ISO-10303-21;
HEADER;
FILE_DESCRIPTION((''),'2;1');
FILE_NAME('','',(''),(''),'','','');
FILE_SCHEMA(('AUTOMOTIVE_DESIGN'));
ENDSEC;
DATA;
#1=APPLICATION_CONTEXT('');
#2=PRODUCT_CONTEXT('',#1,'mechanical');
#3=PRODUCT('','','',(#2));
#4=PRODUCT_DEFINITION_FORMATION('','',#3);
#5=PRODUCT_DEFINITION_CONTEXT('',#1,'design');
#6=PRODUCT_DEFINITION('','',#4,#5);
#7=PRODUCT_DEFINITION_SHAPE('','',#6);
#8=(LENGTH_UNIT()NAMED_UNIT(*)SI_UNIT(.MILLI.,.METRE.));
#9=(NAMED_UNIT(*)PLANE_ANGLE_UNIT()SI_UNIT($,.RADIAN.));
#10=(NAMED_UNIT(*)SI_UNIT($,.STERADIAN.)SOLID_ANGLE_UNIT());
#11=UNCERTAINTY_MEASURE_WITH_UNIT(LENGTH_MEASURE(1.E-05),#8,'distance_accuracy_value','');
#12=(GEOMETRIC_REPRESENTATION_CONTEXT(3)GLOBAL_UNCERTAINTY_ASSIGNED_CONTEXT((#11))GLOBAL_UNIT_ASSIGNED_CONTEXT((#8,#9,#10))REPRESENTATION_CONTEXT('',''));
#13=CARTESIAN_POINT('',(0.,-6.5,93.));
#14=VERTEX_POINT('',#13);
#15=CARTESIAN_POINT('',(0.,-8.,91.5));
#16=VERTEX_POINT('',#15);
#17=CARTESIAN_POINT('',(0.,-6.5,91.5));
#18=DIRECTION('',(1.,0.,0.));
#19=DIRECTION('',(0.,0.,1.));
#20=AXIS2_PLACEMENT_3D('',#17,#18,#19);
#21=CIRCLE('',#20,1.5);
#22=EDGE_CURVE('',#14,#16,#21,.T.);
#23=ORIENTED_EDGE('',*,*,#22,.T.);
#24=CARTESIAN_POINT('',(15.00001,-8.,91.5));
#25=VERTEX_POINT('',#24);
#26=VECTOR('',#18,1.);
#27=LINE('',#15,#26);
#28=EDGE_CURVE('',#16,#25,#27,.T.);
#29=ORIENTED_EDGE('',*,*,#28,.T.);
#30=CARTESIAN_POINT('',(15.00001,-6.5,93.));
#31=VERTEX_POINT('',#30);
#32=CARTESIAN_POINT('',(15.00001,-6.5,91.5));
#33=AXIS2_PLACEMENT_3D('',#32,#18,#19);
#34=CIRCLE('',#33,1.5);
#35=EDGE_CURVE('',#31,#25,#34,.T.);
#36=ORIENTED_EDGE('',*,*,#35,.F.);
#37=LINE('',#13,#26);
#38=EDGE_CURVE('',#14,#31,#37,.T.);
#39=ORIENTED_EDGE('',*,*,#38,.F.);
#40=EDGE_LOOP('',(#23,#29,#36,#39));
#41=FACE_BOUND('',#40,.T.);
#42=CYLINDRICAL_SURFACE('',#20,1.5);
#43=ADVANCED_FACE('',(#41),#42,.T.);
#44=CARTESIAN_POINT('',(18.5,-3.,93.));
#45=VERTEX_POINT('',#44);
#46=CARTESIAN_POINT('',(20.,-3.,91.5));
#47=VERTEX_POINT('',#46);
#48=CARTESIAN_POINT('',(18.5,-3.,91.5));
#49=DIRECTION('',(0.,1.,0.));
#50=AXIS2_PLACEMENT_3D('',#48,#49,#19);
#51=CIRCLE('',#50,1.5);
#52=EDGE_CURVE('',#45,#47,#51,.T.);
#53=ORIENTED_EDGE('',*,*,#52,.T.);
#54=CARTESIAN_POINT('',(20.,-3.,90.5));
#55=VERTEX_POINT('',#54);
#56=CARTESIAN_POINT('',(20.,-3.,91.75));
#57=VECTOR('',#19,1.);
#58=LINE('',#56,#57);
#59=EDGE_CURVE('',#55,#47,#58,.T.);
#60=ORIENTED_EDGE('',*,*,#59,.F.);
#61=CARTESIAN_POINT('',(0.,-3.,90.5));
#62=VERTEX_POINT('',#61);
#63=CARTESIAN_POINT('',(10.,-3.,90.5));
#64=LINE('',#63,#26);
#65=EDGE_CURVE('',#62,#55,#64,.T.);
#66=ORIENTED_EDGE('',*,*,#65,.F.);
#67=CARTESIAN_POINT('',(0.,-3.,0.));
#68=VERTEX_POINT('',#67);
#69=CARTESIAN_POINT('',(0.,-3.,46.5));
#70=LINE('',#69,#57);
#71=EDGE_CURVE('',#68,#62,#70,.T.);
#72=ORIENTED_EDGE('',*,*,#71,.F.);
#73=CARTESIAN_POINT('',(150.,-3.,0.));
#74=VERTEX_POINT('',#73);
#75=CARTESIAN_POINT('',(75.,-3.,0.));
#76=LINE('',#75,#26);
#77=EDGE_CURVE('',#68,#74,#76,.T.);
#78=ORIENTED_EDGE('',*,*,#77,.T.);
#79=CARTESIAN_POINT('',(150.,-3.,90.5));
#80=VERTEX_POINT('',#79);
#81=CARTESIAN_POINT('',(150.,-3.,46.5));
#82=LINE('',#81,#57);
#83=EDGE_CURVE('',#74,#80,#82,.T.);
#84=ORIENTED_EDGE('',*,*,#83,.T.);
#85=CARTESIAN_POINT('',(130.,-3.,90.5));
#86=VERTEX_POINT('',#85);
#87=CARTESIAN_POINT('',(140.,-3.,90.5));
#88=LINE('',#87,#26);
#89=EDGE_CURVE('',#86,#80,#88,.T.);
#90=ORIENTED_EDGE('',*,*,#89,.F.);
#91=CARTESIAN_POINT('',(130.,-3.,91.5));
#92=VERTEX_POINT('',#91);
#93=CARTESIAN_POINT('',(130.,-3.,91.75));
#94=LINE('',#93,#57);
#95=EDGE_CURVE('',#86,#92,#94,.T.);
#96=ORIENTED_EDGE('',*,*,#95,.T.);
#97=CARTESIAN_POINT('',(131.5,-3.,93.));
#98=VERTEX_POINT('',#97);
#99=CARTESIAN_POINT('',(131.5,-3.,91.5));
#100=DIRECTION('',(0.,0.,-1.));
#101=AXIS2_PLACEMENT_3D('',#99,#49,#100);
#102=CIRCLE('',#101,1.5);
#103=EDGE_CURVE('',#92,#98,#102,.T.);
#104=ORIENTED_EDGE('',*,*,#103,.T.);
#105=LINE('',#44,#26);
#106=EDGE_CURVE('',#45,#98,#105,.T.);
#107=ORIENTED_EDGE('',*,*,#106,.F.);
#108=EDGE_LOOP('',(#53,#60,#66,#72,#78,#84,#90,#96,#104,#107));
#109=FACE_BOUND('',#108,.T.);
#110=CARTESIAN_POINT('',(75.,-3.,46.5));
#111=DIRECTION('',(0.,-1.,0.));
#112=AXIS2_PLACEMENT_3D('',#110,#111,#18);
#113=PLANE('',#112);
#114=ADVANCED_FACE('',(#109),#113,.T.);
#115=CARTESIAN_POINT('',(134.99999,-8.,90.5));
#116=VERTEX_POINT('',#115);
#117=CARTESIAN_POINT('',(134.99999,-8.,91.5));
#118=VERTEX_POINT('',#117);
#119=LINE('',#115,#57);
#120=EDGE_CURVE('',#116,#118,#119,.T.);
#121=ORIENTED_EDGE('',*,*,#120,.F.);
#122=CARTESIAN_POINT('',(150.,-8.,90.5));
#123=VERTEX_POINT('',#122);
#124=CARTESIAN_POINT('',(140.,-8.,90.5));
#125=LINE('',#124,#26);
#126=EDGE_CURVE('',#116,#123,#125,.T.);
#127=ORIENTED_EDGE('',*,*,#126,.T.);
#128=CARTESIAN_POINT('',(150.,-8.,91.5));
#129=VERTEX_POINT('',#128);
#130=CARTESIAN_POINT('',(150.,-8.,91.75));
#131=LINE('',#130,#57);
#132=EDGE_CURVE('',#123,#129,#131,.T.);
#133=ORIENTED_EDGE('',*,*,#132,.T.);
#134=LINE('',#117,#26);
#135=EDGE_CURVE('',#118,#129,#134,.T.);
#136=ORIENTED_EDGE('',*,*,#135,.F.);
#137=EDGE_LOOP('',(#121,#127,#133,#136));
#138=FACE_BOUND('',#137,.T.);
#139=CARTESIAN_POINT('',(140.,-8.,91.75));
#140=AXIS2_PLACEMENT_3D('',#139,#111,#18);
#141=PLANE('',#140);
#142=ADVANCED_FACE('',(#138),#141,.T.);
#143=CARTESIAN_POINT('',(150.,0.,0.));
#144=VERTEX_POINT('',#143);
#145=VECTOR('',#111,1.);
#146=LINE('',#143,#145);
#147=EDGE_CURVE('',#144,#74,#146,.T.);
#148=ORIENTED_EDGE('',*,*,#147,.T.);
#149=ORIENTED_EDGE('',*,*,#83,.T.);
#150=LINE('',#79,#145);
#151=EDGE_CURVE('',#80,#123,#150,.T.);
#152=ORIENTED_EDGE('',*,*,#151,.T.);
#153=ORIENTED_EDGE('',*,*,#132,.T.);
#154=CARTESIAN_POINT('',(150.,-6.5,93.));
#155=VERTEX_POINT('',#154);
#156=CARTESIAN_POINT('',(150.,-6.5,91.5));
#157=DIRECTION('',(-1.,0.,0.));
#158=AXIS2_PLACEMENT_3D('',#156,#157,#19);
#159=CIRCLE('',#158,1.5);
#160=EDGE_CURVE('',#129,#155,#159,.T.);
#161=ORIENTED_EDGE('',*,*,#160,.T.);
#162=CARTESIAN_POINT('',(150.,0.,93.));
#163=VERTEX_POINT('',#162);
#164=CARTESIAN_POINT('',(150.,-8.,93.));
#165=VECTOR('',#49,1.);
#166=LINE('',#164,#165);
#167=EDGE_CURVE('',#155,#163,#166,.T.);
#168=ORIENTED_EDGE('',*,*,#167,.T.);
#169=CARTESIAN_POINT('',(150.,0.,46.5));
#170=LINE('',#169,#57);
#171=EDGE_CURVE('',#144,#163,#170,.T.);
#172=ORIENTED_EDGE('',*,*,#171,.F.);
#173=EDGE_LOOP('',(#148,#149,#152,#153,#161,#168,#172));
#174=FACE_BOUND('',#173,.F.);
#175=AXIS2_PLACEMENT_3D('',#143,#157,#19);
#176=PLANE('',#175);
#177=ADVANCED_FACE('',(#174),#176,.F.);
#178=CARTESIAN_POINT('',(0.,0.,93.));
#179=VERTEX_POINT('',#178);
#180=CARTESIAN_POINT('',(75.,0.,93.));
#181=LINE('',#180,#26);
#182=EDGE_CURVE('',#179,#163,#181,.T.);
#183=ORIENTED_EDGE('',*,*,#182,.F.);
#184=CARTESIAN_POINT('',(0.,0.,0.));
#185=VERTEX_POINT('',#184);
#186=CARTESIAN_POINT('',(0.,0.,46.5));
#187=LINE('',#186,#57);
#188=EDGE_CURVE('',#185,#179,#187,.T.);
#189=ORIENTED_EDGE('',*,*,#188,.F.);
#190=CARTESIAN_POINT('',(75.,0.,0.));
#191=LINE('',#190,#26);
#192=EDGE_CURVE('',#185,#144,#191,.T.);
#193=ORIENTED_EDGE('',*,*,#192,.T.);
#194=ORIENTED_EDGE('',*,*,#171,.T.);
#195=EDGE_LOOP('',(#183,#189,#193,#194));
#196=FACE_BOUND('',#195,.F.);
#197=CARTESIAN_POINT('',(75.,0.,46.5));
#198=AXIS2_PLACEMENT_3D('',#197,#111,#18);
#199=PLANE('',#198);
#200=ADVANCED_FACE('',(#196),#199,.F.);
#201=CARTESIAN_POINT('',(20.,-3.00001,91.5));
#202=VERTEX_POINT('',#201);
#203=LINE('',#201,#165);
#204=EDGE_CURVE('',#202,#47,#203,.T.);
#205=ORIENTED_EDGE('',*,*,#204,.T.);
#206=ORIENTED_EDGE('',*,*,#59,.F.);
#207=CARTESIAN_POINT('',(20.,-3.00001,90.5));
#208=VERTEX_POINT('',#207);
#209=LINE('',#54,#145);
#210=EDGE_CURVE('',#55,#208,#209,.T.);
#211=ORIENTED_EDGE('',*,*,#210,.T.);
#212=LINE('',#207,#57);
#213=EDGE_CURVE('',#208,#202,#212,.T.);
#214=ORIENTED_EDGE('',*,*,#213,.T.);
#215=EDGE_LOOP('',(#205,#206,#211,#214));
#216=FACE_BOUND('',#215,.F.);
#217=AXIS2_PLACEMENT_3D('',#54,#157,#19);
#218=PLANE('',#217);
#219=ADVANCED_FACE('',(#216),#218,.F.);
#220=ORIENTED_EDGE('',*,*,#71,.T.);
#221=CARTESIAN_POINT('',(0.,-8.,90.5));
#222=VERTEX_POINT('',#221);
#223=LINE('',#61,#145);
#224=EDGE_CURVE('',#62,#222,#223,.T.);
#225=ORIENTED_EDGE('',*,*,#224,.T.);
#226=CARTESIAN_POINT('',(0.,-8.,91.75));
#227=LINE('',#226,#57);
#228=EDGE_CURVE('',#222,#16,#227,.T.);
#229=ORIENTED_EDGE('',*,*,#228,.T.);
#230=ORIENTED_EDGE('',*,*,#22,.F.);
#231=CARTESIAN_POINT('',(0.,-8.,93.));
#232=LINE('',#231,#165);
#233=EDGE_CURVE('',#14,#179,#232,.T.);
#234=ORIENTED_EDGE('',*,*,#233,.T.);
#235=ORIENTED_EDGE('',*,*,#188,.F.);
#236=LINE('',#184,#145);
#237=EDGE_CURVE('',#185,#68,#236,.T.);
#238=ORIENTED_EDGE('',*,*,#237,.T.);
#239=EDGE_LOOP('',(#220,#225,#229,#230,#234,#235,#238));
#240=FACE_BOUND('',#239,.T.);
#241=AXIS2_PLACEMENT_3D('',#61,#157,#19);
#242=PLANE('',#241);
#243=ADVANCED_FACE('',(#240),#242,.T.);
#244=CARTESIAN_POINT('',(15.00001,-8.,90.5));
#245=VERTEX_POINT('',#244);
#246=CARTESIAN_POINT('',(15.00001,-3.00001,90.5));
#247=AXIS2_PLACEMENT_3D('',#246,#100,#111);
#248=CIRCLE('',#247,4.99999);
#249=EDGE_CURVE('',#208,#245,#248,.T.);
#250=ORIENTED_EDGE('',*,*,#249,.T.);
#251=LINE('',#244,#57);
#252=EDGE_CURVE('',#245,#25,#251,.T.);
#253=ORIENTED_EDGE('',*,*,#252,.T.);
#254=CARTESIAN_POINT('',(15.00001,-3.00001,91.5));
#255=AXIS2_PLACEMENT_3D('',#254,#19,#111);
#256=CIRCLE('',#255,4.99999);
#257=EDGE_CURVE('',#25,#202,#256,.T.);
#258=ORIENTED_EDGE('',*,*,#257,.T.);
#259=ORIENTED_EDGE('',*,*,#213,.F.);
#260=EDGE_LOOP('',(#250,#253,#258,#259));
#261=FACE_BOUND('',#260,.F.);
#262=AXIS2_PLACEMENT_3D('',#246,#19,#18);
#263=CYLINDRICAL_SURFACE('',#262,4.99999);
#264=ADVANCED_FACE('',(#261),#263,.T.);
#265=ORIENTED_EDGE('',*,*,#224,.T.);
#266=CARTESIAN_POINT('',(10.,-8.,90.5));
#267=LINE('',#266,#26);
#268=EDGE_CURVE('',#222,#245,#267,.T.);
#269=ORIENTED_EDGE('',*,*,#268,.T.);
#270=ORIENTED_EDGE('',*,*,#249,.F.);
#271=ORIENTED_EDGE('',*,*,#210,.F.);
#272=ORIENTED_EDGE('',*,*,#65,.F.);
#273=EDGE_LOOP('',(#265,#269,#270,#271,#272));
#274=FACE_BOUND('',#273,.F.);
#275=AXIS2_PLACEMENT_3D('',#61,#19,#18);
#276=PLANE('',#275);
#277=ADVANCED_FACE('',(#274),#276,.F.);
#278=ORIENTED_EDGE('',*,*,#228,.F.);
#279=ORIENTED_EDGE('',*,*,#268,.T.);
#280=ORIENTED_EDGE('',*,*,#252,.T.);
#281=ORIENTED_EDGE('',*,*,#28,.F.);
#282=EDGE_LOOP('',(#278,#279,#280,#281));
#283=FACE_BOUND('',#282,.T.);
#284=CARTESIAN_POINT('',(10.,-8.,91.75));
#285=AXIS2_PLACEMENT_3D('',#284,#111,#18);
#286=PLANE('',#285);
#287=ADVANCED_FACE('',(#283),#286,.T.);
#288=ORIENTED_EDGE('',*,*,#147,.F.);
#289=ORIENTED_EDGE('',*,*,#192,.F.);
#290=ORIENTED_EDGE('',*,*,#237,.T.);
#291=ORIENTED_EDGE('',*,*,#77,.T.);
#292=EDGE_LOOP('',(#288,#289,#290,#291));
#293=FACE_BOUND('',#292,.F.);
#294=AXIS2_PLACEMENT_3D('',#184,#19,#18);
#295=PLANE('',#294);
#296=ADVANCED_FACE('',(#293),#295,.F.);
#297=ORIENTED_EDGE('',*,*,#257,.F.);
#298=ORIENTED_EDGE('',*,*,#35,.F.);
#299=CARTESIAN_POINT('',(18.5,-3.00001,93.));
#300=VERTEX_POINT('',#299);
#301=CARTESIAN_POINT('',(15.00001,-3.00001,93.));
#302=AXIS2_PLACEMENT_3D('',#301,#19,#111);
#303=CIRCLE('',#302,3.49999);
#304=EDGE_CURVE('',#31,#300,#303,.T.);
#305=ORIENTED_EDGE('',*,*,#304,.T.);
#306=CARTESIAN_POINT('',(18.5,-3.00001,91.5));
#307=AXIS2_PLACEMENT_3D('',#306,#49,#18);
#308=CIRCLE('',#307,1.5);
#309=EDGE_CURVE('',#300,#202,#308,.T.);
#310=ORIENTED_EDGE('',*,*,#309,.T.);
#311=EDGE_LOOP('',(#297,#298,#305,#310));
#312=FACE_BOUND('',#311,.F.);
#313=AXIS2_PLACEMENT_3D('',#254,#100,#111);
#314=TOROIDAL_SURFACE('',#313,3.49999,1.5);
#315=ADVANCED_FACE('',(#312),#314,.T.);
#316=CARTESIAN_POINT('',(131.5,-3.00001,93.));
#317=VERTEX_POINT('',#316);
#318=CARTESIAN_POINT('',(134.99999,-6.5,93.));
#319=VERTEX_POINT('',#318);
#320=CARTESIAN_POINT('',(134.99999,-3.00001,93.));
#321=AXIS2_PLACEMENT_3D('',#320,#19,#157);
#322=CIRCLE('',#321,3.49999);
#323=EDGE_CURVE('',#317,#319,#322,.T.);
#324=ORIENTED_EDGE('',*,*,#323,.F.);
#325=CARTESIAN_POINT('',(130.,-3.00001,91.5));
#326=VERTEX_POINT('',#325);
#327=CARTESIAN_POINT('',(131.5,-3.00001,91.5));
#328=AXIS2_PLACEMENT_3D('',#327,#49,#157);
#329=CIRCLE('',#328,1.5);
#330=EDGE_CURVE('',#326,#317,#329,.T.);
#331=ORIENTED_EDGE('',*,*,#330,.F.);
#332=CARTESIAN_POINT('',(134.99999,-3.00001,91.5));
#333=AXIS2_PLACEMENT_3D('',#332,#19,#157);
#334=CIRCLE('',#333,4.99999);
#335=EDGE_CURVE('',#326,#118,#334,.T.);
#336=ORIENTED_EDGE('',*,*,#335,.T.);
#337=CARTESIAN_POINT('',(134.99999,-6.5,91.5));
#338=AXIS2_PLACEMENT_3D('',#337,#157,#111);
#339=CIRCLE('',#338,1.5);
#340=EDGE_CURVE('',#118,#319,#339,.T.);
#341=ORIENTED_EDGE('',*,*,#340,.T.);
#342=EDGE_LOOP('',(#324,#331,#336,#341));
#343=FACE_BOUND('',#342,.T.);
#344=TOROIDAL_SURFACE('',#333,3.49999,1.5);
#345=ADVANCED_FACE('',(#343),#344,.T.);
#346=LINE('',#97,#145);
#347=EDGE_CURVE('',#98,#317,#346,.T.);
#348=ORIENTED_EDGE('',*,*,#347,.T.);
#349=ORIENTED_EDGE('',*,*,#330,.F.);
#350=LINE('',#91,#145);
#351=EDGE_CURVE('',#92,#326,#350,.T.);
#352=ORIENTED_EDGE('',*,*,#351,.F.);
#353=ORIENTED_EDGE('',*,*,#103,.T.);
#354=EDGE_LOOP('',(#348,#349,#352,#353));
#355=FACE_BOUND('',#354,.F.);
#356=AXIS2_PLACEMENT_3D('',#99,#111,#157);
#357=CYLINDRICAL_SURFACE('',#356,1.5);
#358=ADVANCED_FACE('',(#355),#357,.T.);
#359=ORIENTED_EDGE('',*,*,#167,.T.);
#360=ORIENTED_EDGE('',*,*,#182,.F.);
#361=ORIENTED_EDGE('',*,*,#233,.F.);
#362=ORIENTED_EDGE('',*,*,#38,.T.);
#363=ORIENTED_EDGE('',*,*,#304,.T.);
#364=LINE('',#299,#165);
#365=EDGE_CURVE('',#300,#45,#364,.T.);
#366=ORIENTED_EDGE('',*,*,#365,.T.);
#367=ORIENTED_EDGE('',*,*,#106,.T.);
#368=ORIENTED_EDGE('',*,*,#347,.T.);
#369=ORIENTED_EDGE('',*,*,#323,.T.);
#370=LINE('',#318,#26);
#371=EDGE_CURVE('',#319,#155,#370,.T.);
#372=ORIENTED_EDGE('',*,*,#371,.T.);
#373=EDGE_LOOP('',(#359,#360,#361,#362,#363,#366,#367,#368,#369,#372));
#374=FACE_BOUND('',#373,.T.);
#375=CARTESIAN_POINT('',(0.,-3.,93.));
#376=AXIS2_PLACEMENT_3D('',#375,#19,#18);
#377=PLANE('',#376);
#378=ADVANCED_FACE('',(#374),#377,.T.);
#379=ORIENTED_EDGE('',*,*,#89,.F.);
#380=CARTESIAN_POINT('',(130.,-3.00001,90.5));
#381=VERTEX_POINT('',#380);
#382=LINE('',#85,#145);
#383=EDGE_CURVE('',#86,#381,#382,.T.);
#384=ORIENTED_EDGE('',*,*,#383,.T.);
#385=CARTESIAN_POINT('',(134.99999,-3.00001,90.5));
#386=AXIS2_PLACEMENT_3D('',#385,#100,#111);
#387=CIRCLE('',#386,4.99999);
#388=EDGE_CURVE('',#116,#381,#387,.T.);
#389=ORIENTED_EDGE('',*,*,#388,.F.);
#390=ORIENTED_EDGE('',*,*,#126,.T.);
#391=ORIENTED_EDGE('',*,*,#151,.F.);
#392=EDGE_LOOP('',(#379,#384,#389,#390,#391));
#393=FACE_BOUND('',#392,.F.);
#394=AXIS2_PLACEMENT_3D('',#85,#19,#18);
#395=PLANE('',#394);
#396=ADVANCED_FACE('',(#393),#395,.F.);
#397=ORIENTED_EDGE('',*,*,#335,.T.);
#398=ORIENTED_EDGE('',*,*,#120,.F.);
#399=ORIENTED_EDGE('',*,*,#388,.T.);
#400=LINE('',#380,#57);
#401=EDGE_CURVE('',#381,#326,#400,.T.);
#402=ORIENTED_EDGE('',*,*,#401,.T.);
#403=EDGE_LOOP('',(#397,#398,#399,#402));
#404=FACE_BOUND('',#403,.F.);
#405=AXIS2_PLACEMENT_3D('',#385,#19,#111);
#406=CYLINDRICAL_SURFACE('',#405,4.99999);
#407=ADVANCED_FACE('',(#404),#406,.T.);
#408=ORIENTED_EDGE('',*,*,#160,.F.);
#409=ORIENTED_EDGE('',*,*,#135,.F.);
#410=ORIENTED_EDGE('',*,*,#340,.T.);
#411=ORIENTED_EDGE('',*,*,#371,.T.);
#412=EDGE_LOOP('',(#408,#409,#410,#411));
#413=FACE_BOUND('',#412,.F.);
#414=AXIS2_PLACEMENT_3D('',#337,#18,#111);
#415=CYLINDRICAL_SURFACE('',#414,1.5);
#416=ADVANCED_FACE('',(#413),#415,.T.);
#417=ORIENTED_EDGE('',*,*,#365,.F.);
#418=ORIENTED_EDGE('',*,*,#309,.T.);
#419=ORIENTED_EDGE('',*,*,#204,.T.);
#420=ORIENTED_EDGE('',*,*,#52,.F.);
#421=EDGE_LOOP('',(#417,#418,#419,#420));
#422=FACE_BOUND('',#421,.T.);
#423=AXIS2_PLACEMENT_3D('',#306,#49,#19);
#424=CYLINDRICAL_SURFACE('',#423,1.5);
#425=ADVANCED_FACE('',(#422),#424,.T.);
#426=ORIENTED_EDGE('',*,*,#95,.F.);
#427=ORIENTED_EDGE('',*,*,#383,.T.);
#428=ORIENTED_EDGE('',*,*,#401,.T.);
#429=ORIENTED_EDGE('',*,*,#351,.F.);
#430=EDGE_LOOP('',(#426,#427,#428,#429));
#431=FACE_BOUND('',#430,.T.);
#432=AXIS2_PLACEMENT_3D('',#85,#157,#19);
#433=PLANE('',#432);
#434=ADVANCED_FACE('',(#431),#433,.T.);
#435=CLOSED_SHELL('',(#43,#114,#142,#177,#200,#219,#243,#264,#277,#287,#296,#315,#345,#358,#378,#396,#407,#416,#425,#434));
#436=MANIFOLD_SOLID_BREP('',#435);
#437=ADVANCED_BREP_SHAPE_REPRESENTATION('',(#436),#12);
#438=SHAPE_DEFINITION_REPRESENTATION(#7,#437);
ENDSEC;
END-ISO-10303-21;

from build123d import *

# Parameters (mm, degrees)
F0_W     = 150
F0_H     = 93
F1_DEPTH = 3
F2_W     = 20
F2_H     = 2.5
F3_DEPTH = 5
F4_R     = 4.99999
F5_R     = 1.5


# Not quite as in the source:
# - a fillet or chamfer is up to 0.001 mm smaller than in the source, because OpenCascade refuses the exact size


with BuildPart() as f1:
    # F0 (on Front) → F1 (new body)
    with BuildSketch(Plane.XZ):
        with Locations((75, 46.5)):
            Rectangle(F0_W, F0_H)
    extrude(amount=F1_DEPTH)

    # F2 (on face) → F3 (join)
    with BuildSketch(Plane.XZ.offset(3)):
        with Locations((10, 91.75)):
            Rectangle(F2_W, F2_H)
        with Locations((140, 91.75)):
            Rectangle(F2_W, F2_H)
    extrude(amount=F3_DEPTH)

    # F4 (radius 5 in the source; OpenCascade refuses exactly that, so slightly less here)
    f4_edges = [f1.edges().sort_by_distance(p)[0] for p in [
        (20, -8, 91.75),
        (130, -8, 91.75),
    ]]
    fillet(f4_edges, radius=F4_R)

    # F5
    f5_edges = [f1.edges().sort_by_distance(p)[0] for p in [
        (7.500005, -8, 93),
        (142.499995, -8, 93),
    ]]
    fillet(f5_edges, radius=F5_R)


solid = f1.part
